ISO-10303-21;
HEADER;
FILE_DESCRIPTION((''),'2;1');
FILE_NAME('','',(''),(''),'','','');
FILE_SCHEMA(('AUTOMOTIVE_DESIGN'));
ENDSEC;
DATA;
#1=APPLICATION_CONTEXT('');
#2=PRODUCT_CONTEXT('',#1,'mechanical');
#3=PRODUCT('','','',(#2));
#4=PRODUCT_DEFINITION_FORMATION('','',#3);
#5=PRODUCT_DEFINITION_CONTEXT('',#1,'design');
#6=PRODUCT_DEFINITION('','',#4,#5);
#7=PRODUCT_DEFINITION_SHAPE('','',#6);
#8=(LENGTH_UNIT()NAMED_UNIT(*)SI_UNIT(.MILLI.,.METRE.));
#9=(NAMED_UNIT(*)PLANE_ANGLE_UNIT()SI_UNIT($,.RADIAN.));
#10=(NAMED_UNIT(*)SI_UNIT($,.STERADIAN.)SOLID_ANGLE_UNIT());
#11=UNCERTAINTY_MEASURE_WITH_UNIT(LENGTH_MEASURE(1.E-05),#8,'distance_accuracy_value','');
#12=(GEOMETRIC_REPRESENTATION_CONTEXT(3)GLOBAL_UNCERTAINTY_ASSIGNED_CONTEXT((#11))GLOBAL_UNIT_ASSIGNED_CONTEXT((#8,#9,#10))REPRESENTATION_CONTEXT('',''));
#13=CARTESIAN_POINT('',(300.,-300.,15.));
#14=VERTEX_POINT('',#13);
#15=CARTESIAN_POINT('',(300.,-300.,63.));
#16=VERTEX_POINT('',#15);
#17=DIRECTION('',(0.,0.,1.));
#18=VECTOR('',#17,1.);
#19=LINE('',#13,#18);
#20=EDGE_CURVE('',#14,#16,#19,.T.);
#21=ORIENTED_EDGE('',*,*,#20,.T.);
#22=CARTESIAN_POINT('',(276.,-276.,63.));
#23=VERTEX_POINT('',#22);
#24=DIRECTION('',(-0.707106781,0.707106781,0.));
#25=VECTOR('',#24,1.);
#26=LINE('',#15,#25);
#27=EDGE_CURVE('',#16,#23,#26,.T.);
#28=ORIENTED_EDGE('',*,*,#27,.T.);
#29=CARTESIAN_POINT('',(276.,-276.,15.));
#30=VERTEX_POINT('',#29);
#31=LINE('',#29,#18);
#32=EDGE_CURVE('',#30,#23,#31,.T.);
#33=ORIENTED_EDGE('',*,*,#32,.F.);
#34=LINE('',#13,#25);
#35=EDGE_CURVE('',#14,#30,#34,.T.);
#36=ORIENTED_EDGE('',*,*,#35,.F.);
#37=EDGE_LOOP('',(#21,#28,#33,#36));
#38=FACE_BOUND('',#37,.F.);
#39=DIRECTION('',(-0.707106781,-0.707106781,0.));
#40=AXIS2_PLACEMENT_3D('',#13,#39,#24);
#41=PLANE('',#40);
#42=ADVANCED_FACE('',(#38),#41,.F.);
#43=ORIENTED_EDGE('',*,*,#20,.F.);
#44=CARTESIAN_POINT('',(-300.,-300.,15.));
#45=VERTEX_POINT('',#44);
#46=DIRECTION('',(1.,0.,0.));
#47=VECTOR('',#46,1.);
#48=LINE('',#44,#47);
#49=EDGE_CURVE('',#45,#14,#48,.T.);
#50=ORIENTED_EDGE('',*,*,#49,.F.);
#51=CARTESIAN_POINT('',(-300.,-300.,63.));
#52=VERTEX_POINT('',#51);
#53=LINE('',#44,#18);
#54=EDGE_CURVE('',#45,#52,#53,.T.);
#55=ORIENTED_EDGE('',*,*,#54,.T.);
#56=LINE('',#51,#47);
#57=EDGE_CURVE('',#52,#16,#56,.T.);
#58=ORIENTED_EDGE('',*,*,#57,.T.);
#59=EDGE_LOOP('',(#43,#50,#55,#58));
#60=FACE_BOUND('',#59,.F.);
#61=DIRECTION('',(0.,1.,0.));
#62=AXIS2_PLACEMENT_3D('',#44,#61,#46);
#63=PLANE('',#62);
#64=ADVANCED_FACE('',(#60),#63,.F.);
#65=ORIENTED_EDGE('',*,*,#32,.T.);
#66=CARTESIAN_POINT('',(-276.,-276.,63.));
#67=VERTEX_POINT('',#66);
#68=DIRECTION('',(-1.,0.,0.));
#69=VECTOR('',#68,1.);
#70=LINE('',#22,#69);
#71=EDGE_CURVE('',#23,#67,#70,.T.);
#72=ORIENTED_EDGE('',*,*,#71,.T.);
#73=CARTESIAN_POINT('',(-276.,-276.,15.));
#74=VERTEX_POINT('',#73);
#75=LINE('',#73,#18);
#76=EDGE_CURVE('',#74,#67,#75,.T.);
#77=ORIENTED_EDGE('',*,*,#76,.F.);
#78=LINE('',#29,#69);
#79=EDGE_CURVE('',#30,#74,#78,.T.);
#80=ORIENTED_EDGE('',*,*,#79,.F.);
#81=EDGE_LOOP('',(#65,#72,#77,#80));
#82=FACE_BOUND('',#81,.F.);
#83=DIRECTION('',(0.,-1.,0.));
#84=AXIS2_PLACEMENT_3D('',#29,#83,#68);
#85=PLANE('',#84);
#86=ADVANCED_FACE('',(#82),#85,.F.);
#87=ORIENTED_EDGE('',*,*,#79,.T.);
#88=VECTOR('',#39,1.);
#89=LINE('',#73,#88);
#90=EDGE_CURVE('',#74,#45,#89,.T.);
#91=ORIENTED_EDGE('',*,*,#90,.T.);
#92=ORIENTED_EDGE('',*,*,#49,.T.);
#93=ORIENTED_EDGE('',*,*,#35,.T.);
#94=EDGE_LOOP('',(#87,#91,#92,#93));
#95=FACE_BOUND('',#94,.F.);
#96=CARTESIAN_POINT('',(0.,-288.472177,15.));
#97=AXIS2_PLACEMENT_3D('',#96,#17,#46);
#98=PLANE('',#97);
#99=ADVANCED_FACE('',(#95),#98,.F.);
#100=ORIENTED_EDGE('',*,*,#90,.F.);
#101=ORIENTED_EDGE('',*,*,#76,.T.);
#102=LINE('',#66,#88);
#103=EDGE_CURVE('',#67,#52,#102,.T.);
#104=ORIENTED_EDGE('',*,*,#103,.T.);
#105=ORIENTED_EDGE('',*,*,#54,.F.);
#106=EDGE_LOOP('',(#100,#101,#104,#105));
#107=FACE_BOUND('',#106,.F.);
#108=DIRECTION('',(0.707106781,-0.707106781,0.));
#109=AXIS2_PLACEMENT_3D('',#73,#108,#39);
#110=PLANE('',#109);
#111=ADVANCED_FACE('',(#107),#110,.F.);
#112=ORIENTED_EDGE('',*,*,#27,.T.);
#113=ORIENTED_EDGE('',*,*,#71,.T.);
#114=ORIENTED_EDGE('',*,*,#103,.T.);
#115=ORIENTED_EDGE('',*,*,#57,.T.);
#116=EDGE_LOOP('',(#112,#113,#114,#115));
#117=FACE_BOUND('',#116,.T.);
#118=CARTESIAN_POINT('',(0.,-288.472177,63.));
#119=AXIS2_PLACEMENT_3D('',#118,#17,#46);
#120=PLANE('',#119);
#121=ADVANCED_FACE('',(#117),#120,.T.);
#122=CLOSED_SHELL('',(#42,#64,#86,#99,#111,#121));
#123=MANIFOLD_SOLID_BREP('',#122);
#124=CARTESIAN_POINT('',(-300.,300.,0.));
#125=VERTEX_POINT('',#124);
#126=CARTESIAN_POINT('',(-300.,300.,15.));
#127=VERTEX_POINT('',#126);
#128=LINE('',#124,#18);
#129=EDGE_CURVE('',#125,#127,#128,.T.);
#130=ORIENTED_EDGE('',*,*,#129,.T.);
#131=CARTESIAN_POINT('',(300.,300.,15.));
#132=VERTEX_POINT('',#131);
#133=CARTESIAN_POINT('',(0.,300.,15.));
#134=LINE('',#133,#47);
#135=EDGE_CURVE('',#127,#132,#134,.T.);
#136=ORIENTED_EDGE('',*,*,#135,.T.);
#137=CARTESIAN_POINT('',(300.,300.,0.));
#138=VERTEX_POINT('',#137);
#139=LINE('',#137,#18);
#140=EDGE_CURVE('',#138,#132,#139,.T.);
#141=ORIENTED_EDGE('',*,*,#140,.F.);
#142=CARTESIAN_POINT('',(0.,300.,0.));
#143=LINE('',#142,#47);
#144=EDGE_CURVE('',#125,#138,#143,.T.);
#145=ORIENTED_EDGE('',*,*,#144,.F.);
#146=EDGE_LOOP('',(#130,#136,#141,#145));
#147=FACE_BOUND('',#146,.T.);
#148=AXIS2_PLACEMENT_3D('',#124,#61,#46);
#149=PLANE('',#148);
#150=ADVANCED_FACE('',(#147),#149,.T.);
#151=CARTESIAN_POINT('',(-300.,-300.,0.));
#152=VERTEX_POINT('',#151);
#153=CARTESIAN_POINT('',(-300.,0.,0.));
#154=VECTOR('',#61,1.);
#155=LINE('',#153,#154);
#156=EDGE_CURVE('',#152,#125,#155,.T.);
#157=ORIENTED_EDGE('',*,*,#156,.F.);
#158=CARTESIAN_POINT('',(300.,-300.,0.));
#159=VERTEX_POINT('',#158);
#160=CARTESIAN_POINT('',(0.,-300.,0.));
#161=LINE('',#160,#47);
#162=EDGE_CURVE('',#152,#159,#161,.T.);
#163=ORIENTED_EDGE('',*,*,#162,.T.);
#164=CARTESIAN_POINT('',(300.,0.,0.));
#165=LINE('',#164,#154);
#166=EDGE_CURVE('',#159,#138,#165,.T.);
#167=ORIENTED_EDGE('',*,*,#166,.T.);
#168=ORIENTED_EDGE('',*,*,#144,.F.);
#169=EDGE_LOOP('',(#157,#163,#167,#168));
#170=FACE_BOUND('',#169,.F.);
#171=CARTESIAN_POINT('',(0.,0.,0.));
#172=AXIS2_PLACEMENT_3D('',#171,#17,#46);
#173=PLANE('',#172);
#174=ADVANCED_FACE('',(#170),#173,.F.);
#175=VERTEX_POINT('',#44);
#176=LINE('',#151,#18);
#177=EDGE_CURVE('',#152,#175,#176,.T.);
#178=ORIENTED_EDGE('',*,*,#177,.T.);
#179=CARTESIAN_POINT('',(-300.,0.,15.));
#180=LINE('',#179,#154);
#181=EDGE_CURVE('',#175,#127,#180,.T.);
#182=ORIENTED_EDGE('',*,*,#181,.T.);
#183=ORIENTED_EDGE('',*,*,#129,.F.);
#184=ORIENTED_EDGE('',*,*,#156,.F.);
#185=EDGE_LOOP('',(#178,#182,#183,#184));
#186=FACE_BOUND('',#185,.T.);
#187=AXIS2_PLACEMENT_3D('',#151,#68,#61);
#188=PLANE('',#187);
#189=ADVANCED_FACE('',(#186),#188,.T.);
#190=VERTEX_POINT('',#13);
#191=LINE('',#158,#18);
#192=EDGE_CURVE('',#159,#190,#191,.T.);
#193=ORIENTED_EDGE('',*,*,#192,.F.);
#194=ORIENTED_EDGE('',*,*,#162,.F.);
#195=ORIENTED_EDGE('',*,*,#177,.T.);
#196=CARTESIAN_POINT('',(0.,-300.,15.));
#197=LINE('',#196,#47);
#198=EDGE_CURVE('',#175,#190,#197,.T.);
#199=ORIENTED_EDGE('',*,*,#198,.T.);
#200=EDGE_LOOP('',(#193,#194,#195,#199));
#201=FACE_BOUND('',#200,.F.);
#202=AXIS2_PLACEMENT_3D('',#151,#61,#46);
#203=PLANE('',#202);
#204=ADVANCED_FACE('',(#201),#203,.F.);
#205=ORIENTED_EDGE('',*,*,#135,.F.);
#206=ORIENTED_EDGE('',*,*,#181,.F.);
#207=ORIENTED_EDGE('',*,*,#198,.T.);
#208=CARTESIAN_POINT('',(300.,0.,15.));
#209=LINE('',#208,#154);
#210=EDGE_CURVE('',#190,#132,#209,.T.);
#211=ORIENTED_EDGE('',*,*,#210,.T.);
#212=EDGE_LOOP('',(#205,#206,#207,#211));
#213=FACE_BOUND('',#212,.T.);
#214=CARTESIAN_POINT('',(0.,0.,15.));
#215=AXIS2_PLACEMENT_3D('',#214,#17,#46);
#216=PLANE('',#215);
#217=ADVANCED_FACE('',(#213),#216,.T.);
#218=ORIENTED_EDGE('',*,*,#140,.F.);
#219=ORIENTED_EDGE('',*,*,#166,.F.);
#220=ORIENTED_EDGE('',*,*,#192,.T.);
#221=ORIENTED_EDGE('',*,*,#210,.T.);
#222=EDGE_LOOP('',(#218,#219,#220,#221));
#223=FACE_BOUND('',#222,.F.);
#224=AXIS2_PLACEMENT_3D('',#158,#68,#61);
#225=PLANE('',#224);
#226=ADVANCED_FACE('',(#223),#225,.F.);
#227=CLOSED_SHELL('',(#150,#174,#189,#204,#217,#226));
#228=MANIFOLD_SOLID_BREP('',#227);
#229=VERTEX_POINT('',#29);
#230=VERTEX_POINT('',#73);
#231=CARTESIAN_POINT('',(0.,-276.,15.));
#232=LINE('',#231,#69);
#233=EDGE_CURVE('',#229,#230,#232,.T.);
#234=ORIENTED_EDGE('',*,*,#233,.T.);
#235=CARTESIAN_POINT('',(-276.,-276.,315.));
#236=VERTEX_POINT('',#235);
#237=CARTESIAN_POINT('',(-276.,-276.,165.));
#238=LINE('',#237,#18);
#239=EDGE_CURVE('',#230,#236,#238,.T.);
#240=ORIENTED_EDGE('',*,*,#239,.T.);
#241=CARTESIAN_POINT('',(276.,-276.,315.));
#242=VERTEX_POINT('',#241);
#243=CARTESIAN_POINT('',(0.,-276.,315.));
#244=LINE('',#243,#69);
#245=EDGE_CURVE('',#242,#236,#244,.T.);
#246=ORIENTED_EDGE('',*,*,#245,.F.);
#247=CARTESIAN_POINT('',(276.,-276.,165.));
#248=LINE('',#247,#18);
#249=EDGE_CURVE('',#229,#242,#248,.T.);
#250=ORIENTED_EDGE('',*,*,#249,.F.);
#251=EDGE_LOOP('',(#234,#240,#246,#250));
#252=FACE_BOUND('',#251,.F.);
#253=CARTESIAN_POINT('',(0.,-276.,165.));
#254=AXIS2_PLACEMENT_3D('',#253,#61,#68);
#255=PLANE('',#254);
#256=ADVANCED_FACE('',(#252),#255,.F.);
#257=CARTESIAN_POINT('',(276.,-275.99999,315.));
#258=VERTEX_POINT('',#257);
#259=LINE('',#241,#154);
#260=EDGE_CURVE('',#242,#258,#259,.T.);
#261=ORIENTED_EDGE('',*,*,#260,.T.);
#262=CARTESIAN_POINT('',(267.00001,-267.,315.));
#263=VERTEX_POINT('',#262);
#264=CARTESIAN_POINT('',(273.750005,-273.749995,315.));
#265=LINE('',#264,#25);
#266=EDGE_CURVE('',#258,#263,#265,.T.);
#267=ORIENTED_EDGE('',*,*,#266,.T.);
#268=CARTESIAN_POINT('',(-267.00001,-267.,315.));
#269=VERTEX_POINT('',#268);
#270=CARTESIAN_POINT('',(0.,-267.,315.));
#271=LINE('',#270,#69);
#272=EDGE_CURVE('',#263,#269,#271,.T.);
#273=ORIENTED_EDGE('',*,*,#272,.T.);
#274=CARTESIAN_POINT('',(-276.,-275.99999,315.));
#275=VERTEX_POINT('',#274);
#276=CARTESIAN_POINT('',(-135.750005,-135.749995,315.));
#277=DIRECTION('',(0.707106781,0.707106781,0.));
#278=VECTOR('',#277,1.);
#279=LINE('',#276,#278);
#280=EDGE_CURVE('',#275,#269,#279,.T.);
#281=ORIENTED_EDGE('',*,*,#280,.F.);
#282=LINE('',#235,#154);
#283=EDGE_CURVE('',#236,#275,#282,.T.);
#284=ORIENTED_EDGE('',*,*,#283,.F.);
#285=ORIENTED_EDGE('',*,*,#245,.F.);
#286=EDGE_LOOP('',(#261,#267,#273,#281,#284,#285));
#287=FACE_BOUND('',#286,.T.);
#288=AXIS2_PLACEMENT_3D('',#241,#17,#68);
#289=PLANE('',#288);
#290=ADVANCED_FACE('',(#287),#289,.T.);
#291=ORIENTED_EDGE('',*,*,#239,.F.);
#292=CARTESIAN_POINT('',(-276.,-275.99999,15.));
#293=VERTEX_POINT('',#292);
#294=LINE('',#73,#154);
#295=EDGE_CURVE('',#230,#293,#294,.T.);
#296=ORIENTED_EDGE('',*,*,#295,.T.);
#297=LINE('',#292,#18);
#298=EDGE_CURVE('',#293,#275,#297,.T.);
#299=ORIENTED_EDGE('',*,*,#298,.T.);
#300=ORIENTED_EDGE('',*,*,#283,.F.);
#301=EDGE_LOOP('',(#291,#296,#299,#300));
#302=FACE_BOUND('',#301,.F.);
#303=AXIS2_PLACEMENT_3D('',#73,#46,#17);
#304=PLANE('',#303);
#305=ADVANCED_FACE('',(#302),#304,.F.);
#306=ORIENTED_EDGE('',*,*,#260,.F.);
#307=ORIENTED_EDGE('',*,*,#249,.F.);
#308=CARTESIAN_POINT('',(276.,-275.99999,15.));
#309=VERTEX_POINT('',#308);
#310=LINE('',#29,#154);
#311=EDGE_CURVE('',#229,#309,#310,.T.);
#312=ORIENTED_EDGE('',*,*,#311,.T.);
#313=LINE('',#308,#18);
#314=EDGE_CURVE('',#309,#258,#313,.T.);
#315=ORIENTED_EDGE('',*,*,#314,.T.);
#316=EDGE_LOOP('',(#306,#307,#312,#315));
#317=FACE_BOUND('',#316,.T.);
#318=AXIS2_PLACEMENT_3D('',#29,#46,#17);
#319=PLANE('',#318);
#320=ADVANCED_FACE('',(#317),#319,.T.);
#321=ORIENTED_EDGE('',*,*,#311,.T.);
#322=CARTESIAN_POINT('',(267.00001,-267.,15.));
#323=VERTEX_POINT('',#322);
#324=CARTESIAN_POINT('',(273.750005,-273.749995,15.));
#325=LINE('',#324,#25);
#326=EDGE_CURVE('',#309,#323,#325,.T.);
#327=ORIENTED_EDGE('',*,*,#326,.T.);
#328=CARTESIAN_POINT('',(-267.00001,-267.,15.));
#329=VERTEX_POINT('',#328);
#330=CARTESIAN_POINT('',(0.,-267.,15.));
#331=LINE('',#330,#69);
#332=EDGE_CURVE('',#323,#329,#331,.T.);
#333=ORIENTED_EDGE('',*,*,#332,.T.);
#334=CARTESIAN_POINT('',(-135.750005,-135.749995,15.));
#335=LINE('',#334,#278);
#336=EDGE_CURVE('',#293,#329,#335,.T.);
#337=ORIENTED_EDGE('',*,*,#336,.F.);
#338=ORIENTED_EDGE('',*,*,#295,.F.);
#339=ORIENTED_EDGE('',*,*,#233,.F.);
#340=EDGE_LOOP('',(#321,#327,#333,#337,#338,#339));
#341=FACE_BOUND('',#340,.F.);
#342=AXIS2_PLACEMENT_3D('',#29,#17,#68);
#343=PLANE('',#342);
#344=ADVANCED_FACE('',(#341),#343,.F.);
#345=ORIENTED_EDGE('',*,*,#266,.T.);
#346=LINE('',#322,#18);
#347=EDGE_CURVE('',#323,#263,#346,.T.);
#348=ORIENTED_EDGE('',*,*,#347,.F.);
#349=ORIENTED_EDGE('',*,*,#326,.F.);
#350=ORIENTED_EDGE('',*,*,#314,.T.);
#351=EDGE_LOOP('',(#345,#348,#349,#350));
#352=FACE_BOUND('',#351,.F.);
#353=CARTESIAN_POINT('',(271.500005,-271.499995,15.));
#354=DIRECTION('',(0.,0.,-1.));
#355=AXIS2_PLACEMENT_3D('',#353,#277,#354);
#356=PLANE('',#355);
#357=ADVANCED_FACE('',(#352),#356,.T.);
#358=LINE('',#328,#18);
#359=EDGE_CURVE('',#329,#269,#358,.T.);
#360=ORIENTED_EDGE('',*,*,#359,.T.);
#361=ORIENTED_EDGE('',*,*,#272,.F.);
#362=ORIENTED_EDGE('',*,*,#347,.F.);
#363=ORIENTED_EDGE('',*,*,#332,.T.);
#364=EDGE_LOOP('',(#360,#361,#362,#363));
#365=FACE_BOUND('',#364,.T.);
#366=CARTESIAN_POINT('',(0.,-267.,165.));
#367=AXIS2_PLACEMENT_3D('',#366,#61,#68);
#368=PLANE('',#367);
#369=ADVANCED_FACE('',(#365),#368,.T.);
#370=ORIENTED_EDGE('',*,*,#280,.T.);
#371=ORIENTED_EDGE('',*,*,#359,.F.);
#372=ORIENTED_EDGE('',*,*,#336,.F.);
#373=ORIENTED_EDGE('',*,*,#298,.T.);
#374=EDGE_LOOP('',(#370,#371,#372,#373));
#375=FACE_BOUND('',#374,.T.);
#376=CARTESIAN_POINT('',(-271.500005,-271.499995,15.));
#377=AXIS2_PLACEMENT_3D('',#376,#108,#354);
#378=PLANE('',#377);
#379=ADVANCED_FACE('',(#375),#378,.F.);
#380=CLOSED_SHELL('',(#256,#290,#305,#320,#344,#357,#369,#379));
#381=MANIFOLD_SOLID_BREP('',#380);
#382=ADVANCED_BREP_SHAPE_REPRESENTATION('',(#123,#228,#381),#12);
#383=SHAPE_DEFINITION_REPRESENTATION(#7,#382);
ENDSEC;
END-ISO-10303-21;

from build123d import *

# Parameters (mm, degrees)
F0_W     = 600
F0_H     = 600
F1_DEPTH = 15
F3_DEPTH = 48
F4_W     = 552
F4_H     = 300
F5_DEPTH = 9
F6_SIZE  = 8.99999


# Not quite as in the source:
# - a fillet or chamfer is up to 0.001 mm smaller than in the source, because OpenCascade refuses the exact size


with BuildPart() as f1:
    # F0 (on Top) → F1 (new body)
    with BuildSketch(Plane.XY):
        Rectangle(F0_W, F0_H)
    extrude(amount=F1_DEPTH)


with BuildPart() as f3:
    # F2 (on face) → F3 (new body)
    with BuildSketch(Plane.XY.offset(15)):
        Polygon((-276, -276), (-300, -300), (300, -300), (276, -276), align=None)
    extrude(amount=F3_DEPTH)


with BuildPart() as f5:
    # F4 (on face) → F5 (new body)
    with BuildSketch(Plane(origin=(0, -276, 0), x_dir=(-1, 0, 0), z_dir=(0, 1, 0))):
        with Locations((0, 165)):
            Rectangle(F4_W, F4_H)
    extrude(amount=F5_DEPTH)

    # F6 (size 9 in the source; OpenCascade refuses exactly that, so slightly less here)
    f6_edges = [f5.edges().sort_by_distance(p)[0] for p in [
        (276, -267, 165),
        (-276, -267, 165),
    ]]
    chamfer(f6_edges, length=F6_SIZE)


solid = Compound([f1.part, f3.part, f5.part])
